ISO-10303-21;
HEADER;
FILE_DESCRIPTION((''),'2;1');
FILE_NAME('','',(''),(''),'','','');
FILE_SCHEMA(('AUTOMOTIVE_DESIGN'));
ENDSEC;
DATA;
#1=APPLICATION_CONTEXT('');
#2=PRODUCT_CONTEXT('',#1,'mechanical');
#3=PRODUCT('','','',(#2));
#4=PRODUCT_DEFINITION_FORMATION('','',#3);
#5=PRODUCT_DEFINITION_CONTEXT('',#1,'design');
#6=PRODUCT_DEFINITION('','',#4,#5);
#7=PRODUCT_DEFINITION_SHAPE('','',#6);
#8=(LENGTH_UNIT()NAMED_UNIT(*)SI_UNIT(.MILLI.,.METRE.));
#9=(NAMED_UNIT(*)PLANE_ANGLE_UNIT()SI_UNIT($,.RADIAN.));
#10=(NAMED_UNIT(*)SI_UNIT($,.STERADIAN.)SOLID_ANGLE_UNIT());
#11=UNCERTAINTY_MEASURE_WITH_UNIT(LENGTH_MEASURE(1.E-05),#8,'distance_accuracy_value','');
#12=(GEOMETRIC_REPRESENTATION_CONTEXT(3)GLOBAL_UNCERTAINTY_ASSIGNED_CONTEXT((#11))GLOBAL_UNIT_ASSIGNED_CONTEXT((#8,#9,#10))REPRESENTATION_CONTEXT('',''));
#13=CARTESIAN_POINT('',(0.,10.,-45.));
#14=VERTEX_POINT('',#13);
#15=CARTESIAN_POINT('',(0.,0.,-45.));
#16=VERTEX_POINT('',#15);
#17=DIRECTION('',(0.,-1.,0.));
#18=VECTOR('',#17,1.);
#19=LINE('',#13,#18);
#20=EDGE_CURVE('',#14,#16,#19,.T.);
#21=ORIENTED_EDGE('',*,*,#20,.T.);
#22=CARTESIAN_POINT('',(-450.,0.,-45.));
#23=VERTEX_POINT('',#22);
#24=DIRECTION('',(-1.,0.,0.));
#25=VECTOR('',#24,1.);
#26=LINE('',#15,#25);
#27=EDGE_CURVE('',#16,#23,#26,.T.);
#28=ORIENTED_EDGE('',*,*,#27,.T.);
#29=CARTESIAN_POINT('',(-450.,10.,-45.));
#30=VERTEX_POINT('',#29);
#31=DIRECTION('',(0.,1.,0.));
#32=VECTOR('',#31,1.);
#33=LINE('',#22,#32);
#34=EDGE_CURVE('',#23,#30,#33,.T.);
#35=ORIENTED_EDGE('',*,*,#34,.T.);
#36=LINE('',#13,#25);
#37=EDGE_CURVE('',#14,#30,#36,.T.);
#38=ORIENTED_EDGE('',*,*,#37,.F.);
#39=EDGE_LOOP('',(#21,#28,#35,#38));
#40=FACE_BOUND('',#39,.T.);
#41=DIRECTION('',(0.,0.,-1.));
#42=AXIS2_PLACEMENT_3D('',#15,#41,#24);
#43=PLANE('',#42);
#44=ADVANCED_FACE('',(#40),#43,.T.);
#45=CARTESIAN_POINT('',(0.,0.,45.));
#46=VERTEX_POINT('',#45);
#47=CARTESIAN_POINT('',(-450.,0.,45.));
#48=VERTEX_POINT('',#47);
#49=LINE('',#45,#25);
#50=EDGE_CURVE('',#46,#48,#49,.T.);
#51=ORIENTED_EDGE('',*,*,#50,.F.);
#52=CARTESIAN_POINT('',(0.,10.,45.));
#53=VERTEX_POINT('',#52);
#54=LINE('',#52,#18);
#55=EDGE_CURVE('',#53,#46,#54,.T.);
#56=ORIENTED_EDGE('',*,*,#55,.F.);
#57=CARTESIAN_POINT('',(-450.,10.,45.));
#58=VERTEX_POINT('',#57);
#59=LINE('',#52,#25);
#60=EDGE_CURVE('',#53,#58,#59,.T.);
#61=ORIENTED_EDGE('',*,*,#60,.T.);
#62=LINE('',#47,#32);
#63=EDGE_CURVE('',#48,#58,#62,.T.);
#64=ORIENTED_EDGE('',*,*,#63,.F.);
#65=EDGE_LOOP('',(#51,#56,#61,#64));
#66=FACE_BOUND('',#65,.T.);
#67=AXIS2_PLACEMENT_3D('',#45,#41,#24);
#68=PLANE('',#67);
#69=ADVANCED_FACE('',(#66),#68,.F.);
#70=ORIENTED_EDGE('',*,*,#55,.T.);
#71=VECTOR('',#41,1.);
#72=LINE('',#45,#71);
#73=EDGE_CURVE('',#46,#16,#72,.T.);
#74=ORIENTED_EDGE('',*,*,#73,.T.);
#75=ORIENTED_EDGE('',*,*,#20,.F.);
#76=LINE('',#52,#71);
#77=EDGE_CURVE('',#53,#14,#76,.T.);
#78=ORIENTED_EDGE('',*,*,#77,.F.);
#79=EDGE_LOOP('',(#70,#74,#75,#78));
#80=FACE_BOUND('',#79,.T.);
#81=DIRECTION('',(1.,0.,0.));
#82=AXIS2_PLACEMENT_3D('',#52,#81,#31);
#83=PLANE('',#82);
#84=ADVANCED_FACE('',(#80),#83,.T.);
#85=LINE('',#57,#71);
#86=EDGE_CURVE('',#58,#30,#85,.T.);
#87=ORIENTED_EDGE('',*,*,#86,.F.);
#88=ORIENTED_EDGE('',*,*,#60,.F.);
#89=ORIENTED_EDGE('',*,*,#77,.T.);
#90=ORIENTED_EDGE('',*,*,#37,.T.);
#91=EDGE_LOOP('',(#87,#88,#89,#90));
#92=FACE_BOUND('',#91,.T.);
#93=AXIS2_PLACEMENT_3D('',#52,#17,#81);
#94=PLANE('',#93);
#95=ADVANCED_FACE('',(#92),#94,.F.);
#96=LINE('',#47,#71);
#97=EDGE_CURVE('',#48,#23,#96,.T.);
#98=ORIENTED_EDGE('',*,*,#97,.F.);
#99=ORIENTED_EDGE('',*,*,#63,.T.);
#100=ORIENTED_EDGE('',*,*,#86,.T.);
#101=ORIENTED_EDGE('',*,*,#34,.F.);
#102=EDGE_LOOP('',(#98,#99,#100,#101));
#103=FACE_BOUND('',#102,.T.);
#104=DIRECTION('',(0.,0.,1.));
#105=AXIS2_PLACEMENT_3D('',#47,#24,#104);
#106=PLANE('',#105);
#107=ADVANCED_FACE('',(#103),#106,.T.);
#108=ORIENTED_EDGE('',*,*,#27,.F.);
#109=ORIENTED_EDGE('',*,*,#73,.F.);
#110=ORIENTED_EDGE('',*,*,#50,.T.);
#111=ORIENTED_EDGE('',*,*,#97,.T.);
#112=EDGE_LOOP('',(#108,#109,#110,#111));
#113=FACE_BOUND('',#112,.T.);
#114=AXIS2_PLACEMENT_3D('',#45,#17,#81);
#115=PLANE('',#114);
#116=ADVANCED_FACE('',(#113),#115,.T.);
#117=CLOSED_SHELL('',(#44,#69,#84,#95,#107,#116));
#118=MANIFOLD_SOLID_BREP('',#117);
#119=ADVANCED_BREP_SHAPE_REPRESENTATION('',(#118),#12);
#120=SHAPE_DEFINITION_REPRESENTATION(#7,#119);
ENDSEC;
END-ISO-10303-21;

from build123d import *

# Parameters (mm, degrees)
SKETCH8_W          = 450
SKETCH8_H          = 10
BASE_FLANGE1_DEPTH = 45


# Sheet-metal steps are written as plain solids
with BuildPart() as part:
    # Sketch8 → Base-Flange1 (new, symmetric)
    with BuildSketch(Plane.XY):
        with Locations((-225, 5)):
            Rectangle(SKETCH8_W, SKETCH8_H)
    extrude(amount=BASE_FLANGE1_DEPTH, both=True)


solid = part.part
